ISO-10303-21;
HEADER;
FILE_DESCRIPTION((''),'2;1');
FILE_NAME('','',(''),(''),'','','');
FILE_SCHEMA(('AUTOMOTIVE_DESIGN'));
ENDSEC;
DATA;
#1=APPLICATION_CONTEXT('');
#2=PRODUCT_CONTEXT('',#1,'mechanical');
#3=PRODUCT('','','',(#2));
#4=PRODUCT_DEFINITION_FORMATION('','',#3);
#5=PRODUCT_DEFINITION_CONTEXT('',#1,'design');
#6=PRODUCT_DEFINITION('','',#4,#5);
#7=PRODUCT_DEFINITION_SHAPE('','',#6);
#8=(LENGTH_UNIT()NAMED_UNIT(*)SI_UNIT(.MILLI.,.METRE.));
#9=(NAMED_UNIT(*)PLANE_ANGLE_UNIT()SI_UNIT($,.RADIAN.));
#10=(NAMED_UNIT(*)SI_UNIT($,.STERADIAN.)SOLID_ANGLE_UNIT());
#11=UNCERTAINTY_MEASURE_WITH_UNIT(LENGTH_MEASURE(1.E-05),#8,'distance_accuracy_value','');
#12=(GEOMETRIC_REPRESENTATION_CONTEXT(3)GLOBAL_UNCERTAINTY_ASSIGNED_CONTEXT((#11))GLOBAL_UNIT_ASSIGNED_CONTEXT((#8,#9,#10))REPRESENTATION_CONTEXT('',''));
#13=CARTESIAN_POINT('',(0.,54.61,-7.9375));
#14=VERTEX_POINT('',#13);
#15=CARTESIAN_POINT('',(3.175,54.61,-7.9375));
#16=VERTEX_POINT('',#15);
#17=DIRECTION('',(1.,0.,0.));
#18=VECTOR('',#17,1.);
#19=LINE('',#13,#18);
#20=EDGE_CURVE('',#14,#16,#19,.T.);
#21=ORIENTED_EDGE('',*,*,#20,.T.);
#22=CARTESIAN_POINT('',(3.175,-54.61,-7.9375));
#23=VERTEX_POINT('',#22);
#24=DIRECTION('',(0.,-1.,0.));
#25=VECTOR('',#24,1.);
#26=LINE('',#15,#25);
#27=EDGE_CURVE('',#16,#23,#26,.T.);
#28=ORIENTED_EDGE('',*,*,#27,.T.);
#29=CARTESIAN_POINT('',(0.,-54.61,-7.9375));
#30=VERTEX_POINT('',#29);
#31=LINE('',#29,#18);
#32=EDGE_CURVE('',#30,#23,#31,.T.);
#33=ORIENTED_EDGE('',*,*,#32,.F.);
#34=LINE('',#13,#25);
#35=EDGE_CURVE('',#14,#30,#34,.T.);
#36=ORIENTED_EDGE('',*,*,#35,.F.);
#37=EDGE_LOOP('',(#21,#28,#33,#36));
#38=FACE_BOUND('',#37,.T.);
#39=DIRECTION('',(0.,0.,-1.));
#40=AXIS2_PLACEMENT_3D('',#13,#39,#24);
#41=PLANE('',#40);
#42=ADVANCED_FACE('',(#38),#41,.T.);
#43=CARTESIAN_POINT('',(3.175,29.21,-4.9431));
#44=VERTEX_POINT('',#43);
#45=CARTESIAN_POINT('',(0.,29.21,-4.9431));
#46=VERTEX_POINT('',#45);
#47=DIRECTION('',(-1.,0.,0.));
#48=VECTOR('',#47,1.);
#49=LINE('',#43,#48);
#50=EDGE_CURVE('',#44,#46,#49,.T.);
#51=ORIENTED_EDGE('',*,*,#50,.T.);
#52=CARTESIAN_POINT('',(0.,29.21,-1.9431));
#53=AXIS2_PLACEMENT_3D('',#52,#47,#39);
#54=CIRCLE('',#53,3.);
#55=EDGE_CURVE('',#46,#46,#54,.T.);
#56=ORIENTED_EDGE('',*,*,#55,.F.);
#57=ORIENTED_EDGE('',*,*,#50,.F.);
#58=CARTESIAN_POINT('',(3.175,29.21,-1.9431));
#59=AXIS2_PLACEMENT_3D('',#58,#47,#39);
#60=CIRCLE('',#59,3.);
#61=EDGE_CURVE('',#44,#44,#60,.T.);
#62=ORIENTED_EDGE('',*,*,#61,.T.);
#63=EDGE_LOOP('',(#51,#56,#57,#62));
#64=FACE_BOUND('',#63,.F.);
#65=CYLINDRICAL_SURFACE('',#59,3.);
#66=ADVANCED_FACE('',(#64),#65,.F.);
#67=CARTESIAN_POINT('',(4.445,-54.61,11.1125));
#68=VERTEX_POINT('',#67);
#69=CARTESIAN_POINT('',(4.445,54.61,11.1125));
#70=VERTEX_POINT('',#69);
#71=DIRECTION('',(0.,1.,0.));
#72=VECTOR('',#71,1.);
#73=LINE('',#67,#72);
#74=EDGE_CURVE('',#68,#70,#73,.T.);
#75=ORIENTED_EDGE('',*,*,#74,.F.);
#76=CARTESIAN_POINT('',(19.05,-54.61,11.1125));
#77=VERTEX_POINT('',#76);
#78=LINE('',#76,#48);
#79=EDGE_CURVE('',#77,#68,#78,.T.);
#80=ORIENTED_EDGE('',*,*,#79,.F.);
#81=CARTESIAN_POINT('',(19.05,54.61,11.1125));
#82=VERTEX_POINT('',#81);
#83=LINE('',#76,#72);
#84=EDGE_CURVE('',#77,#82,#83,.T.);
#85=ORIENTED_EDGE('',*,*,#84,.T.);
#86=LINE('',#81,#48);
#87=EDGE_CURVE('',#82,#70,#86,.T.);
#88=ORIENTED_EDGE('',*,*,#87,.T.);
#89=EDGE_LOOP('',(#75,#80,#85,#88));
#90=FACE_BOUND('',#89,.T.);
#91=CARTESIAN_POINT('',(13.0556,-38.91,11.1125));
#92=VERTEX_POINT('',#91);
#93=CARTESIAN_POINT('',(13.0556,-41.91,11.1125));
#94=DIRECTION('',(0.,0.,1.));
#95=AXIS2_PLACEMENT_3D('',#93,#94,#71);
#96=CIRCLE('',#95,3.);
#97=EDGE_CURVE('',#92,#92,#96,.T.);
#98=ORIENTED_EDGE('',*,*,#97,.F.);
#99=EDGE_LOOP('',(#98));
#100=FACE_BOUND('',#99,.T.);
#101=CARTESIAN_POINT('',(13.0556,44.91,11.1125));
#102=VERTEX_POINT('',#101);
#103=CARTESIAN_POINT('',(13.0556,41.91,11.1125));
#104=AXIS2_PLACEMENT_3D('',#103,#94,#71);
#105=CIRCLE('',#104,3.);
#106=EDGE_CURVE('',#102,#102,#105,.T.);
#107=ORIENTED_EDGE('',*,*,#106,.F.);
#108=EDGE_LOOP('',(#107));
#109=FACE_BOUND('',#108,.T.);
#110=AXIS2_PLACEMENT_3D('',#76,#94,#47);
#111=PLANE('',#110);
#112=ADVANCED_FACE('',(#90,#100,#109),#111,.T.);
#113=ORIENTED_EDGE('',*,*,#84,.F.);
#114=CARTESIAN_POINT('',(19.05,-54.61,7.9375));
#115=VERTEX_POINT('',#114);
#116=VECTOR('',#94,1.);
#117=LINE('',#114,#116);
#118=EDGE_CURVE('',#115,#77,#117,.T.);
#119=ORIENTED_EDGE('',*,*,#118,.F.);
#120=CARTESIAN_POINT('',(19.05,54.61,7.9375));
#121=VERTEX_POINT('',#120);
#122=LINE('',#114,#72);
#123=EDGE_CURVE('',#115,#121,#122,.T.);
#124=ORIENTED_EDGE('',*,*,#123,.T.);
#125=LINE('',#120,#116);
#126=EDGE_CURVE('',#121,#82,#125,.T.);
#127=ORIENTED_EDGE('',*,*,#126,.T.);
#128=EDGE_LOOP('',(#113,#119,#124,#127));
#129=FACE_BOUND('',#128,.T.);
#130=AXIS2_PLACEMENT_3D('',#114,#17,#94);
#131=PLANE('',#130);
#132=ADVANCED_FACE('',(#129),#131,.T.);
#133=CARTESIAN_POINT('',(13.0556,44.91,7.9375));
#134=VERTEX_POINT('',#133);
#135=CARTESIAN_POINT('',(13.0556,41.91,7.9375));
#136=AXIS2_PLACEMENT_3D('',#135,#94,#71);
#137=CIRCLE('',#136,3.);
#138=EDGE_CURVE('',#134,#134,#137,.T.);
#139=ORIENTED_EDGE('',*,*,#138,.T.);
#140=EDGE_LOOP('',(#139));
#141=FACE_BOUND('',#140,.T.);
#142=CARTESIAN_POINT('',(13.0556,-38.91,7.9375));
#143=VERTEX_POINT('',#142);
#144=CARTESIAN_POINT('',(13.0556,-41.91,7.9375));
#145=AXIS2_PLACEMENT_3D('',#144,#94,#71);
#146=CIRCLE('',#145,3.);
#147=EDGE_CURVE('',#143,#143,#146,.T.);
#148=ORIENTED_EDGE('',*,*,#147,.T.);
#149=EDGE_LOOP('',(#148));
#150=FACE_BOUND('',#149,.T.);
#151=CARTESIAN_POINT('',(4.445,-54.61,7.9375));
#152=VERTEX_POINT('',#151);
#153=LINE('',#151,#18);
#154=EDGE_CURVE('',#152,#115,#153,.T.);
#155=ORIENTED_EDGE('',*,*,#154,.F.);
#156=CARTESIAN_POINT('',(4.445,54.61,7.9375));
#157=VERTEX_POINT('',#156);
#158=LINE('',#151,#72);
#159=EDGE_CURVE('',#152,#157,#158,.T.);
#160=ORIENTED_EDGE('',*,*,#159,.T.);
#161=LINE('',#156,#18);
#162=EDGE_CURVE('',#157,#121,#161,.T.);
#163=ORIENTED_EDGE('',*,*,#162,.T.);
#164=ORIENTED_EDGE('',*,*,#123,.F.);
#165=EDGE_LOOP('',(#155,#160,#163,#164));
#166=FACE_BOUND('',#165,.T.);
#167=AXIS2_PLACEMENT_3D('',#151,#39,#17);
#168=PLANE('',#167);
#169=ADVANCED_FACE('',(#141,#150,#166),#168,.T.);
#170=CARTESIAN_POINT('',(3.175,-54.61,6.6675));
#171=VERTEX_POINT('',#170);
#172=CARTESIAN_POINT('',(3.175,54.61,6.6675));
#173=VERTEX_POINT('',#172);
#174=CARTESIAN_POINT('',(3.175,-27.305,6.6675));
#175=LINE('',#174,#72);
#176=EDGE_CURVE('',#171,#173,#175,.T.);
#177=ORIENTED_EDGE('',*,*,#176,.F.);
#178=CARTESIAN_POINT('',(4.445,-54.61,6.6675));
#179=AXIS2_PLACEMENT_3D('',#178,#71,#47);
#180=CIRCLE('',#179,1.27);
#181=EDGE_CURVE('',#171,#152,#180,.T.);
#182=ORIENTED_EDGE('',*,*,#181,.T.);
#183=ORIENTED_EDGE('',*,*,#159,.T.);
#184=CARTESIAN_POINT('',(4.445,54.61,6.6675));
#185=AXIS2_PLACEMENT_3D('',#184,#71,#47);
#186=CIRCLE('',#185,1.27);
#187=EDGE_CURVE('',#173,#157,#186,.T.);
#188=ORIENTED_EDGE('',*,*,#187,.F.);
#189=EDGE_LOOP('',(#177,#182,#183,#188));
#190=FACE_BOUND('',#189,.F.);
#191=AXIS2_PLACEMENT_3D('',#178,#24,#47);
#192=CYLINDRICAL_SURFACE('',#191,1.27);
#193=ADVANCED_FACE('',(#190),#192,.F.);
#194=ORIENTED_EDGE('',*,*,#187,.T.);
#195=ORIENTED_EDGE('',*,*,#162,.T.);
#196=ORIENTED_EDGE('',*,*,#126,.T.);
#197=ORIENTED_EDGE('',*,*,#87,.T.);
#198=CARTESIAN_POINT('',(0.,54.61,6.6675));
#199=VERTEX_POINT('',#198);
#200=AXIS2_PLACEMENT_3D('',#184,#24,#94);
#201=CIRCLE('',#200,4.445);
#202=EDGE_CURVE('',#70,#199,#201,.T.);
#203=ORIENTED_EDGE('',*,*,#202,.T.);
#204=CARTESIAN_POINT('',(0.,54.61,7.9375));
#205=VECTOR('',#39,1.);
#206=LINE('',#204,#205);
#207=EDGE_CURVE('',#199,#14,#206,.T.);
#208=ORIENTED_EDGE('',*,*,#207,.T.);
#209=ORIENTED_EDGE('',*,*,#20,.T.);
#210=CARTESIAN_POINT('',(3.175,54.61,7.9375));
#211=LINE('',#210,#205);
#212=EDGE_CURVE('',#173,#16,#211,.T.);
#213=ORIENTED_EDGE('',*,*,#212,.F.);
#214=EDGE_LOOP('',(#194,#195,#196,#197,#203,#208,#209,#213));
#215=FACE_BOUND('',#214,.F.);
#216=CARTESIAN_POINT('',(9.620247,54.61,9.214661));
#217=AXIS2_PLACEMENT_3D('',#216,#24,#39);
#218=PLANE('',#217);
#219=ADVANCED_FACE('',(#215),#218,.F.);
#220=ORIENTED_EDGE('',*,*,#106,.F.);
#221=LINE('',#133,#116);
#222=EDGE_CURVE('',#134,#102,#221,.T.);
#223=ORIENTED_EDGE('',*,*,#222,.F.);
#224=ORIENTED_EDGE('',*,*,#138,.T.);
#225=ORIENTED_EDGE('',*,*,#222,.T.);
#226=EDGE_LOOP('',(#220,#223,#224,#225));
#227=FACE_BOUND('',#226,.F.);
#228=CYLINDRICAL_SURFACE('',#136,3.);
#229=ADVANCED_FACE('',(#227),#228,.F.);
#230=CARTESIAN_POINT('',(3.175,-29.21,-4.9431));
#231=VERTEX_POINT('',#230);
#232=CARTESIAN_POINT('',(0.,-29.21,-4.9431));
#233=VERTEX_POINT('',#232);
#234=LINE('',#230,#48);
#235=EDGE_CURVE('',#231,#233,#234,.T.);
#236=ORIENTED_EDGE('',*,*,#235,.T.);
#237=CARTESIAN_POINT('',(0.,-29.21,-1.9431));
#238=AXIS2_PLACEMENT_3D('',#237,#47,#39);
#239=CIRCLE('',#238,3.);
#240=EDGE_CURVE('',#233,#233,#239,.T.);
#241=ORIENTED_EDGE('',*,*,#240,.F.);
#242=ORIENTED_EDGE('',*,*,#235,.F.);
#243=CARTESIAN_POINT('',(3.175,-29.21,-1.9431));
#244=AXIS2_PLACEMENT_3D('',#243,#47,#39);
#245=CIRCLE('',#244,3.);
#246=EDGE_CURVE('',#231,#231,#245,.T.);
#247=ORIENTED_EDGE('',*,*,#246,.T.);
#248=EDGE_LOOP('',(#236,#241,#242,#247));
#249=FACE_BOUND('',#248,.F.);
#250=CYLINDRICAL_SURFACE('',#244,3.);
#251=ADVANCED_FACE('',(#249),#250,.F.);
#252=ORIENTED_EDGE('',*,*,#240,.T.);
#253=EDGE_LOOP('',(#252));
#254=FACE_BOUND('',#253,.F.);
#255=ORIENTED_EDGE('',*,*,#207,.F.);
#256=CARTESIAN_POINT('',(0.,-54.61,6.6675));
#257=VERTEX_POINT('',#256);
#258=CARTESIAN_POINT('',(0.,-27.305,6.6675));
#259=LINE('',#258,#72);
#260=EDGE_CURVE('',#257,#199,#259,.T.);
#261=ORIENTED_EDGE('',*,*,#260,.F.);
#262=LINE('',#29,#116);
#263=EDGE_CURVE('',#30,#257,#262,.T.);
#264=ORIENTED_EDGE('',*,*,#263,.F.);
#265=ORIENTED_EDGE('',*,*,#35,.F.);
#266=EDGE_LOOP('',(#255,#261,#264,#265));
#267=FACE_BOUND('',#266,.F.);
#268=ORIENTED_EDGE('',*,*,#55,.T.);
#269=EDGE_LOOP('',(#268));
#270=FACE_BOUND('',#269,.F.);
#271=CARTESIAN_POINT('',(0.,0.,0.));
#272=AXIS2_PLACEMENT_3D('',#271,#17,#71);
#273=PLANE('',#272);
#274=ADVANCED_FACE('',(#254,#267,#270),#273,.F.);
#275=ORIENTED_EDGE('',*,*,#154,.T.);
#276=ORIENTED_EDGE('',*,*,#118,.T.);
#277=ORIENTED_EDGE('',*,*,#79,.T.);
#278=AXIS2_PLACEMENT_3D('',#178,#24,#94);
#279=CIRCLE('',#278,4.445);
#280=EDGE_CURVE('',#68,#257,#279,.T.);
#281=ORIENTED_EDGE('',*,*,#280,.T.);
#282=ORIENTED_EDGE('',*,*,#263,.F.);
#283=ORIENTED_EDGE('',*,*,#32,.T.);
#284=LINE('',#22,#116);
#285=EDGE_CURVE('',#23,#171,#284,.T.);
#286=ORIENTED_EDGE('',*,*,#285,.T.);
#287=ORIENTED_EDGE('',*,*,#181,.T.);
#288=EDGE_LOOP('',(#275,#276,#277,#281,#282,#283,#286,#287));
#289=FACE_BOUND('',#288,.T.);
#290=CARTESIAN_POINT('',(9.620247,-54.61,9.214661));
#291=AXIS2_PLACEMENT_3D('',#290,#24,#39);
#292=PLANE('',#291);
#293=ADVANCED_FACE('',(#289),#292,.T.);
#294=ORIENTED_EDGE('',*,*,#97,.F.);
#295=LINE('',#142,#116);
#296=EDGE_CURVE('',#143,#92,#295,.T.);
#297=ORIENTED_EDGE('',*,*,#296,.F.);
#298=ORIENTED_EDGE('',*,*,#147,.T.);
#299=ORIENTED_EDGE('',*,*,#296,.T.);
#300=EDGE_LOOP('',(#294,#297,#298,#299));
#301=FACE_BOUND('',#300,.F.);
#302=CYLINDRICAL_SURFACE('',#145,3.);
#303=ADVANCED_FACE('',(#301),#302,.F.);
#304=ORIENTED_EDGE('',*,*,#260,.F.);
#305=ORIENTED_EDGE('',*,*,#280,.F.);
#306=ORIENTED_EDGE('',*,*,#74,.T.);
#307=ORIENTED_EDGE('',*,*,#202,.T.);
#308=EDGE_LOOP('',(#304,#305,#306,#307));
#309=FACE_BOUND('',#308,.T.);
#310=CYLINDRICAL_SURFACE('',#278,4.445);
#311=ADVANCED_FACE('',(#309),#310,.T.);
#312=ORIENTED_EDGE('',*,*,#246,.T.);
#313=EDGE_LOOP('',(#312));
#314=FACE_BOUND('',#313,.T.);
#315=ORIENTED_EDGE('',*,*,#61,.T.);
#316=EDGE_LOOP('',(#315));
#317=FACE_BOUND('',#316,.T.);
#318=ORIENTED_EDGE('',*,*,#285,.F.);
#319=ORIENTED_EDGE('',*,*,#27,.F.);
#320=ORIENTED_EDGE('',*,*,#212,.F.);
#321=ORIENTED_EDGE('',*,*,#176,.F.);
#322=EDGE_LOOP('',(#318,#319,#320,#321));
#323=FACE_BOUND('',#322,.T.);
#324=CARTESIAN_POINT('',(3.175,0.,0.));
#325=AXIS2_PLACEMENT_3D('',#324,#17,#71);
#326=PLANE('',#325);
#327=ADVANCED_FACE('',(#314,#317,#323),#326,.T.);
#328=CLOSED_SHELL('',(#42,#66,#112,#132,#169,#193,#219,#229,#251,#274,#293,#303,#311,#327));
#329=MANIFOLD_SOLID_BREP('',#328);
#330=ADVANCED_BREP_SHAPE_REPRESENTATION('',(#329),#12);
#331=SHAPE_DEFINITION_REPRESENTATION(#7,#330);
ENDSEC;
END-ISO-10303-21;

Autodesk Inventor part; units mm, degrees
ref_plane "YZ Plane" through (0, 0, 0) normal (1, 0, 0) x (0, 1, 0)
ref_plane "XZ Plane" through (0, 0, 0) normal (0, 1, 0) x (-1, 0, 0)
ref_plane "XY Plane" through (0, 0, 0) normal (0, 0, 1) x (1, 0, 0)
sketch "Sketch1" plane through (0, 0, 0) normal (1, 0, 0) x (0, 1, 0)
  point P0 (0, 0)
sketch "Sketch2" plane through (0, 0, 0) normal (1, 0, 0) x (0, 1, 0)
  line L0 (-54.61, 7.9375) -> (54.61, 7.9375)
  line L1 (54.61, 7.9375) -> (54.61, -7.9375)
  line L2 (54.61, -7.9375) -> (-54.61, -7.9375)
  line L3 (-54.61, -7.9375) -> (-54.61, 7.9375)
  line L4 (-54.61, 7.9375) -> (54.61, -7.9375) construction
  line L5 (54.61, 7.9375) -> (-54.61, -7.9375) construction
  point P0 (0, 0)
  dimension "d0" = 15.875
  dimension "d1" = 109.22
extrude "Extrusion1" add sketch "Sketch2" along normal blind 3.175
sketch "Sketch3" plane through (3.175, -54.61, 7.9375) normal (0, 0, 1) x (1, 0, 0)
  line L0 (0, 109.22) -> (0, 0)
  line L1 (0, 0) -> (15.875, 0)
  line L2 (15.875, 0) -> (15.875, 109.22)
  line L3 (15.875, 109.22) -> (0, 109.22)
edge flange "Flange1" height 19.05 angle 90 thickness 3.175 bend radius 1.27 thickness toward (0, 0, 1) relief tear relief width 3.175 relief depth 1.5875 edges at (3.175, 0, 7.9375) wall of the first edge with corners at (3.175, 54.61, 7.9375) (3.175, -54.61, 7.9375) (19.05, -54.61, 7.9375) (19.05, 54.61, 7.9375)
bend "Bend1"
corner "Corner1"
sketch "Sketch4" plane through (3.175, 0, 0) normal (1, 0, 0) x (0, 0, -1)
  line L0 (1.9431, 29.21) -> (1.9431, -29.21) construction
  line L1 (7.9375, -54.61) -> (7.9375, 54.61) construction
  line L2 (7.9375, 54.61) -> (-6.6675, 54.61) projected
  line L3 (-6.6675, -54.61) -> (7.9375, -54.61) projected
  point P0 (0, 0)
  dimension "d14" = 5.9944
  dimension "d15" = 25.4
  dimension "d16" = 25.4
hole "Hole1" at (3.175, 29.21, -1.9431) at (3.175, -29.21, -1.9431) direction (-1, 0, 0) diameter 6 end through all
sketch "Sketch5" plane through (19.05, -54.61, 7.9375) normal (0, 0, -1) x (-1, 0, 0)
  line L0 (5.9944, 12.7) -> (5.9944, 96.52) construction
  line L1 (0, 109.22) -> (0, 0) construction
  line L2 (0, 109.22) -> (14.605, 109.22) construction
  line L3 (0, 0) -> (14.605, 0) construction
  point P0 (19.05, 54.61)
  dimension "d24" = 5.9944
  dimension "d25" = 12.7
  dimension "d26" = 12.7
hole "Hole2" at (13.0556, 41.91, 7.9375) at (13.0556, -41.91, 7.9375) direction (0, 0, 1) diameter 6 end through all
sketch "Sketch6" plane through (3.175, 0, 0) normal (1, 0, 0) x (0, 0, -1)
  circle A0 centre (1.9431, 29.21) radius 3 projected
  point P0 (0, 0)
  point P1 (4.9431, 29.21)
equation "\"d22\" = Thickness"
equation "\"d32\" = Thickness"
equation "\"d4\" = BendReliefWidth"
equation "\"d5\" = BendReliefDepth"
equation "\"d6\" = MinimumRemnant"
equation "\"d7\" = BendRadius"
equation "\"d11\" = CornerReliefSize"
equation "\"d12\" = GapSize"
equation "\"d13\" = JacobiRadiusSize"
equation "\"BendRadius\" = Thickness"
equation "\"BendReliefWidth\" = Thickness"
equation "\"BendReliefDepth\" = 0.5 * Thickness"
equation "\"CornerReliefSize\" = 4 * Thickness"
equation "\"MinimumRemnant\" = 2 * Thickness"
equation "\"TransitionRadius\" = BendRadius"
equation "\"JacobiRadiusSize\" = BendRadius"
equation "\"GapSize\" = Thickness"
equation "\"Thickness\" = 3.175"
properties part number "PCB_brackets" material "Aluminum 6061"
